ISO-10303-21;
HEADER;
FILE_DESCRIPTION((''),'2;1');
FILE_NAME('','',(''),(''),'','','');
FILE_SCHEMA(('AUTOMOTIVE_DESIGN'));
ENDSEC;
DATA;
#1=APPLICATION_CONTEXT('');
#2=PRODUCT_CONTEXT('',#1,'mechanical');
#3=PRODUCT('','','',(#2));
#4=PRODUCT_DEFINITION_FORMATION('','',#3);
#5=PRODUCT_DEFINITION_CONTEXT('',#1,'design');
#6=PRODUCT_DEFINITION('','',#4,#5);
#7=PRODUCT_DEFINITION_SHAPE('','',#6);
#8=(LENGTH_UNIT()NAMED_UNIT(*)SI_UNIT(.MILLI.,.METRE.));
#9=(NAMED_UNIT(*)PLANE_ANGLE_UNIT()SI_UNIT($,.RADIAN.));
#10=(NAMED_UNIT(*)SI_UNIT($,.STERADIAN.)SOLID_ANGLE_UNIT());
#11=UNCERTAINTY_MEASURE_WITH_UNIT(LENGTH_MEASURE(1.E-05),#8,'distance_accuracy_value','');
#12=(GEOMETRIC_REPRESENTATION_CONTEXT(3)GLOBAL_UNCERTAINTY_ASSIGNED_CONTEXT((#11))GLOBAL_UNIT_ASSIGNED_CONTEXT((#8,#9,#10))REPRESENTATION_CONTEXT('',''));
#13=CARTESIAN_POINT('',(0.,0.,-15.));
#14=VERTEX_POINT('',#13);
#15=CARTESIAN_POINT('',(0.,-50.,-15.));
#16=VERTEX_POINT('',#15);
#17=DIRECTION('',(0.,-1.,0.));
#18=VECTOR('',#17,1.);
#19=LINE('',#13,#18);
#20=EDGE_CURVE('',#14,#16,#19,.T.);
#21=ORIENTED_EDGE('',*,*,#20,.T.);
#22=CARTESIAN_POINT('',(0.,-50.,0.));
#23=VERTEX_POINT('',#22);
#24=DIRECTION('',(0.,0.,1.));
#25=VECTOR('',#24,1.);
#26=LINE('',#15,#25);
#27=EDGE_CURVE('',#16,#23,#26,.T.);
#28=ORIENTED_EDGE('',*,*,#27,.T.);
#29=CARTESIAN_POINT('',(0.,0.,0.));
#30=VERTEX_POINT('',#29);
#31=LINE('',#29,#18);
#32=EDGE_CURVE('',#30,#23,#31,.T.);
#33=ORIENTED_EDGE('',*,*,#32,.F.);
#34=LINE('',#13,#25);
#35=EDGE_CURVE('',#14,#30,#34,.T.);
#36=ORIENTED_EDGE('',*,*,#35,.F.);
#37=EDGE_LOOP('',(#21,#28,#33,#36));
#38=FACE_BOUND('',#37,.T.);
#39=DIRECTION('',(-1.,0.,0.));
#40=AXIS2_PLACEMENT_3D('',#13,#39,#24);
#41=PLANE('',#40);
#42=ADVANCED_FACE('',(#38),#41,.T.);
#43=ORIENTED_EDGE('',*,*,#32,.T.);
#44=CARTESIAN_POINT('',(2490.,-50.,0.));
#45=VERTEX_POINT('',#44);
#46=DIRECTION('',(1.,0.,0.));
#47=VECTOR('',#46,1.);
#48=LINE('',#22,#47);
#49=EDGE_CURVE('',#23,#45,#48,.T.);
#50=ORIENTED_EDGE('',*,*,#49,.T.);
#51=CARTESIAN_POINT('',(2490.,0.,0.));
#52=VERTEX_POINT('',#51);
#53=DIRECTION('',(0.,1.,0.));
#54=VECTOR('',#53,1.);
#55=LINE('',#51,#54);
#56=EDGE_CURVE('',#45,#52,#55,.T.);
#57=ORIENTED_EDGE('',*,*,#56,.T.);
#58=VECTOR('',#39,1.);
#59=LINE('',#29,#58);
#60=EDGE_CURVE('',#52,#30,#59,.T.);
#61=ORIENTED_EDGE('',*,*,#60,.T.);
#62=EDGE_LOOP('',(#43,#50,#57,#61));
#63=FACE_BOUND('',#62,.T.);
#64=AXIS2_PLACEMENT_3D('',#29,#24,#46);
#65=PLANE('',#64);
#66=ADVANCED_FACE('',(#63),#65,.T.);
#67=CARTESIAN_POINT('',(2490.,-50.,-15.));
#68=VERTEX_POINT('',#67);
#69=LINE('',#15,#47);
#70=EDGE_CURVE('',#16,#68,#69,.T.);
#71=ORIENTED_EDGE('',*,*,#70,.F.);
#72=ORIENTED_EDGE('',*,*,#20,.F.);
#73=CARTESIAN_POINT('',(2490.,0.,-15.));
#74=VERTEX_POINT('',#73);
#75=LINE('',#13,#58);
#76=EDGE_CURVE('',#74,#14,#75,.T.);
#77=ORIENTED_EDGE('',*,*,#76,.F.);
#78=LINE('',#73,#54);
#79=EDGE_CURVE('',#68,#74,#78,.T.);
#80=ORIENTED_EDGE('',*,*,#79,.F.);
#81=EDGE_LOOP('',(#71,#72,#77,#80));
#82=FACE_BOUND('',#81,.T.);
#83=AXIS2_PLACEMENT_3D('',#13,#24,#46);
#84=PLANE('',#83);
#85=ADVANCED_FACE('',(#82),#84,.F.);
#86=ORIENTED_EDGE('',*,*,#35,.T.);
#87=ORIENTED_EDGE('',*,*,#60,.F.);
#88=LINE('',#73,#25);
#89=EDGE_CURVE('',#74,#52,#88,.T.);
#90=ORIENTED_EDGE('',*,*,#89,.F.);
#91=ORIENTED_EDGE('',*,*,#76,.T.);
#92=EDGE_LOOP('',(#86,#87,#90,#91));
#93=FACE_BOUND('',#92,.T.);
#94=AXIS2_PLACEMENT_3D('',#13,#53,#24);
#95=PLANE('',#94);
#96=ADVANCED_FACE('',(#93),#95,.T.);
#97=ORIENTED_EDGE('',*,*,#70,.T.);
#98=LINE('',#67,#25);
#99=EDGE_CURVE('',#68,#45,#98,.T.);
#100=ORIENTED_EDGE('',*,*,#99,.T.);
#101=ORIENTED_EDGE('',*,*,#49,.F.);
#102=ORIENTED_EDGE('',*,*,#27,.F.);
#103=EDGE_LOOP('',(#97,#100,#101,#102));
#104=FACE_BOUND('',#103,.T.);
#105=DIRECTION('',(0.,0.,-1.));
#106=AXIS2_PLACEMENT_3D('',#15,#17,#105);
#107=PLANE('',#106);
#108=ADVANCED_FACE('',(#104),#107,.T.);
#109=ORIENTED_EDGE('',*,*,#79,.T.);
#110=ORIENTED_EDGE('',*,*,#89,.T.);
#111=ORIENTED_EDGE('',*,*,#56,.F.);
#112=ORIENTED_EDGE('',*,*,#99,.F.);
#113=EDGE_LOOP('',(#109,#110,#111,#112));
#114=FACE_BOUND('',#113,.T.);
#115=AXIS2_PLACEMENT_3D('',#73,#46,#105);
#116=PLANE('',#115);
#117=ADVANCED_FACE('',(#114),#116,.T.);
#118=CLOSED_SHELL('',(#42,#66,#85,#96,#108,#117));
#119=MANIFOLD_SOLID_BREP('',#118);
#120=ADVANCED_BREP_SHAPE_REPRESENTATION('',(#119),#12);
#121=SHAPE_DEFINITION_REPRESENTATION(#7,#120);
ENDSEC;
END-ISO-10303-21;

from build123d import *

# Parameters (mm, degrees)
IZIM1_W            = 2490
IZIM1_H            = 50
TABAN_FLAN_1_DEPTH = 15


# Sheet-metal steps are written as plain solids
with BuildPart() as part:
    # Çizim1 → Taban-Flanş1 (new body)
    with BuildSketch(Plane.XY):
        with Locations((1245, -25)):
            Rectangle(IZIM1_W, IZIM1_H)
    extrude(amount=-TABAN_FLAN_1_DEPTH)


solid = part.part
